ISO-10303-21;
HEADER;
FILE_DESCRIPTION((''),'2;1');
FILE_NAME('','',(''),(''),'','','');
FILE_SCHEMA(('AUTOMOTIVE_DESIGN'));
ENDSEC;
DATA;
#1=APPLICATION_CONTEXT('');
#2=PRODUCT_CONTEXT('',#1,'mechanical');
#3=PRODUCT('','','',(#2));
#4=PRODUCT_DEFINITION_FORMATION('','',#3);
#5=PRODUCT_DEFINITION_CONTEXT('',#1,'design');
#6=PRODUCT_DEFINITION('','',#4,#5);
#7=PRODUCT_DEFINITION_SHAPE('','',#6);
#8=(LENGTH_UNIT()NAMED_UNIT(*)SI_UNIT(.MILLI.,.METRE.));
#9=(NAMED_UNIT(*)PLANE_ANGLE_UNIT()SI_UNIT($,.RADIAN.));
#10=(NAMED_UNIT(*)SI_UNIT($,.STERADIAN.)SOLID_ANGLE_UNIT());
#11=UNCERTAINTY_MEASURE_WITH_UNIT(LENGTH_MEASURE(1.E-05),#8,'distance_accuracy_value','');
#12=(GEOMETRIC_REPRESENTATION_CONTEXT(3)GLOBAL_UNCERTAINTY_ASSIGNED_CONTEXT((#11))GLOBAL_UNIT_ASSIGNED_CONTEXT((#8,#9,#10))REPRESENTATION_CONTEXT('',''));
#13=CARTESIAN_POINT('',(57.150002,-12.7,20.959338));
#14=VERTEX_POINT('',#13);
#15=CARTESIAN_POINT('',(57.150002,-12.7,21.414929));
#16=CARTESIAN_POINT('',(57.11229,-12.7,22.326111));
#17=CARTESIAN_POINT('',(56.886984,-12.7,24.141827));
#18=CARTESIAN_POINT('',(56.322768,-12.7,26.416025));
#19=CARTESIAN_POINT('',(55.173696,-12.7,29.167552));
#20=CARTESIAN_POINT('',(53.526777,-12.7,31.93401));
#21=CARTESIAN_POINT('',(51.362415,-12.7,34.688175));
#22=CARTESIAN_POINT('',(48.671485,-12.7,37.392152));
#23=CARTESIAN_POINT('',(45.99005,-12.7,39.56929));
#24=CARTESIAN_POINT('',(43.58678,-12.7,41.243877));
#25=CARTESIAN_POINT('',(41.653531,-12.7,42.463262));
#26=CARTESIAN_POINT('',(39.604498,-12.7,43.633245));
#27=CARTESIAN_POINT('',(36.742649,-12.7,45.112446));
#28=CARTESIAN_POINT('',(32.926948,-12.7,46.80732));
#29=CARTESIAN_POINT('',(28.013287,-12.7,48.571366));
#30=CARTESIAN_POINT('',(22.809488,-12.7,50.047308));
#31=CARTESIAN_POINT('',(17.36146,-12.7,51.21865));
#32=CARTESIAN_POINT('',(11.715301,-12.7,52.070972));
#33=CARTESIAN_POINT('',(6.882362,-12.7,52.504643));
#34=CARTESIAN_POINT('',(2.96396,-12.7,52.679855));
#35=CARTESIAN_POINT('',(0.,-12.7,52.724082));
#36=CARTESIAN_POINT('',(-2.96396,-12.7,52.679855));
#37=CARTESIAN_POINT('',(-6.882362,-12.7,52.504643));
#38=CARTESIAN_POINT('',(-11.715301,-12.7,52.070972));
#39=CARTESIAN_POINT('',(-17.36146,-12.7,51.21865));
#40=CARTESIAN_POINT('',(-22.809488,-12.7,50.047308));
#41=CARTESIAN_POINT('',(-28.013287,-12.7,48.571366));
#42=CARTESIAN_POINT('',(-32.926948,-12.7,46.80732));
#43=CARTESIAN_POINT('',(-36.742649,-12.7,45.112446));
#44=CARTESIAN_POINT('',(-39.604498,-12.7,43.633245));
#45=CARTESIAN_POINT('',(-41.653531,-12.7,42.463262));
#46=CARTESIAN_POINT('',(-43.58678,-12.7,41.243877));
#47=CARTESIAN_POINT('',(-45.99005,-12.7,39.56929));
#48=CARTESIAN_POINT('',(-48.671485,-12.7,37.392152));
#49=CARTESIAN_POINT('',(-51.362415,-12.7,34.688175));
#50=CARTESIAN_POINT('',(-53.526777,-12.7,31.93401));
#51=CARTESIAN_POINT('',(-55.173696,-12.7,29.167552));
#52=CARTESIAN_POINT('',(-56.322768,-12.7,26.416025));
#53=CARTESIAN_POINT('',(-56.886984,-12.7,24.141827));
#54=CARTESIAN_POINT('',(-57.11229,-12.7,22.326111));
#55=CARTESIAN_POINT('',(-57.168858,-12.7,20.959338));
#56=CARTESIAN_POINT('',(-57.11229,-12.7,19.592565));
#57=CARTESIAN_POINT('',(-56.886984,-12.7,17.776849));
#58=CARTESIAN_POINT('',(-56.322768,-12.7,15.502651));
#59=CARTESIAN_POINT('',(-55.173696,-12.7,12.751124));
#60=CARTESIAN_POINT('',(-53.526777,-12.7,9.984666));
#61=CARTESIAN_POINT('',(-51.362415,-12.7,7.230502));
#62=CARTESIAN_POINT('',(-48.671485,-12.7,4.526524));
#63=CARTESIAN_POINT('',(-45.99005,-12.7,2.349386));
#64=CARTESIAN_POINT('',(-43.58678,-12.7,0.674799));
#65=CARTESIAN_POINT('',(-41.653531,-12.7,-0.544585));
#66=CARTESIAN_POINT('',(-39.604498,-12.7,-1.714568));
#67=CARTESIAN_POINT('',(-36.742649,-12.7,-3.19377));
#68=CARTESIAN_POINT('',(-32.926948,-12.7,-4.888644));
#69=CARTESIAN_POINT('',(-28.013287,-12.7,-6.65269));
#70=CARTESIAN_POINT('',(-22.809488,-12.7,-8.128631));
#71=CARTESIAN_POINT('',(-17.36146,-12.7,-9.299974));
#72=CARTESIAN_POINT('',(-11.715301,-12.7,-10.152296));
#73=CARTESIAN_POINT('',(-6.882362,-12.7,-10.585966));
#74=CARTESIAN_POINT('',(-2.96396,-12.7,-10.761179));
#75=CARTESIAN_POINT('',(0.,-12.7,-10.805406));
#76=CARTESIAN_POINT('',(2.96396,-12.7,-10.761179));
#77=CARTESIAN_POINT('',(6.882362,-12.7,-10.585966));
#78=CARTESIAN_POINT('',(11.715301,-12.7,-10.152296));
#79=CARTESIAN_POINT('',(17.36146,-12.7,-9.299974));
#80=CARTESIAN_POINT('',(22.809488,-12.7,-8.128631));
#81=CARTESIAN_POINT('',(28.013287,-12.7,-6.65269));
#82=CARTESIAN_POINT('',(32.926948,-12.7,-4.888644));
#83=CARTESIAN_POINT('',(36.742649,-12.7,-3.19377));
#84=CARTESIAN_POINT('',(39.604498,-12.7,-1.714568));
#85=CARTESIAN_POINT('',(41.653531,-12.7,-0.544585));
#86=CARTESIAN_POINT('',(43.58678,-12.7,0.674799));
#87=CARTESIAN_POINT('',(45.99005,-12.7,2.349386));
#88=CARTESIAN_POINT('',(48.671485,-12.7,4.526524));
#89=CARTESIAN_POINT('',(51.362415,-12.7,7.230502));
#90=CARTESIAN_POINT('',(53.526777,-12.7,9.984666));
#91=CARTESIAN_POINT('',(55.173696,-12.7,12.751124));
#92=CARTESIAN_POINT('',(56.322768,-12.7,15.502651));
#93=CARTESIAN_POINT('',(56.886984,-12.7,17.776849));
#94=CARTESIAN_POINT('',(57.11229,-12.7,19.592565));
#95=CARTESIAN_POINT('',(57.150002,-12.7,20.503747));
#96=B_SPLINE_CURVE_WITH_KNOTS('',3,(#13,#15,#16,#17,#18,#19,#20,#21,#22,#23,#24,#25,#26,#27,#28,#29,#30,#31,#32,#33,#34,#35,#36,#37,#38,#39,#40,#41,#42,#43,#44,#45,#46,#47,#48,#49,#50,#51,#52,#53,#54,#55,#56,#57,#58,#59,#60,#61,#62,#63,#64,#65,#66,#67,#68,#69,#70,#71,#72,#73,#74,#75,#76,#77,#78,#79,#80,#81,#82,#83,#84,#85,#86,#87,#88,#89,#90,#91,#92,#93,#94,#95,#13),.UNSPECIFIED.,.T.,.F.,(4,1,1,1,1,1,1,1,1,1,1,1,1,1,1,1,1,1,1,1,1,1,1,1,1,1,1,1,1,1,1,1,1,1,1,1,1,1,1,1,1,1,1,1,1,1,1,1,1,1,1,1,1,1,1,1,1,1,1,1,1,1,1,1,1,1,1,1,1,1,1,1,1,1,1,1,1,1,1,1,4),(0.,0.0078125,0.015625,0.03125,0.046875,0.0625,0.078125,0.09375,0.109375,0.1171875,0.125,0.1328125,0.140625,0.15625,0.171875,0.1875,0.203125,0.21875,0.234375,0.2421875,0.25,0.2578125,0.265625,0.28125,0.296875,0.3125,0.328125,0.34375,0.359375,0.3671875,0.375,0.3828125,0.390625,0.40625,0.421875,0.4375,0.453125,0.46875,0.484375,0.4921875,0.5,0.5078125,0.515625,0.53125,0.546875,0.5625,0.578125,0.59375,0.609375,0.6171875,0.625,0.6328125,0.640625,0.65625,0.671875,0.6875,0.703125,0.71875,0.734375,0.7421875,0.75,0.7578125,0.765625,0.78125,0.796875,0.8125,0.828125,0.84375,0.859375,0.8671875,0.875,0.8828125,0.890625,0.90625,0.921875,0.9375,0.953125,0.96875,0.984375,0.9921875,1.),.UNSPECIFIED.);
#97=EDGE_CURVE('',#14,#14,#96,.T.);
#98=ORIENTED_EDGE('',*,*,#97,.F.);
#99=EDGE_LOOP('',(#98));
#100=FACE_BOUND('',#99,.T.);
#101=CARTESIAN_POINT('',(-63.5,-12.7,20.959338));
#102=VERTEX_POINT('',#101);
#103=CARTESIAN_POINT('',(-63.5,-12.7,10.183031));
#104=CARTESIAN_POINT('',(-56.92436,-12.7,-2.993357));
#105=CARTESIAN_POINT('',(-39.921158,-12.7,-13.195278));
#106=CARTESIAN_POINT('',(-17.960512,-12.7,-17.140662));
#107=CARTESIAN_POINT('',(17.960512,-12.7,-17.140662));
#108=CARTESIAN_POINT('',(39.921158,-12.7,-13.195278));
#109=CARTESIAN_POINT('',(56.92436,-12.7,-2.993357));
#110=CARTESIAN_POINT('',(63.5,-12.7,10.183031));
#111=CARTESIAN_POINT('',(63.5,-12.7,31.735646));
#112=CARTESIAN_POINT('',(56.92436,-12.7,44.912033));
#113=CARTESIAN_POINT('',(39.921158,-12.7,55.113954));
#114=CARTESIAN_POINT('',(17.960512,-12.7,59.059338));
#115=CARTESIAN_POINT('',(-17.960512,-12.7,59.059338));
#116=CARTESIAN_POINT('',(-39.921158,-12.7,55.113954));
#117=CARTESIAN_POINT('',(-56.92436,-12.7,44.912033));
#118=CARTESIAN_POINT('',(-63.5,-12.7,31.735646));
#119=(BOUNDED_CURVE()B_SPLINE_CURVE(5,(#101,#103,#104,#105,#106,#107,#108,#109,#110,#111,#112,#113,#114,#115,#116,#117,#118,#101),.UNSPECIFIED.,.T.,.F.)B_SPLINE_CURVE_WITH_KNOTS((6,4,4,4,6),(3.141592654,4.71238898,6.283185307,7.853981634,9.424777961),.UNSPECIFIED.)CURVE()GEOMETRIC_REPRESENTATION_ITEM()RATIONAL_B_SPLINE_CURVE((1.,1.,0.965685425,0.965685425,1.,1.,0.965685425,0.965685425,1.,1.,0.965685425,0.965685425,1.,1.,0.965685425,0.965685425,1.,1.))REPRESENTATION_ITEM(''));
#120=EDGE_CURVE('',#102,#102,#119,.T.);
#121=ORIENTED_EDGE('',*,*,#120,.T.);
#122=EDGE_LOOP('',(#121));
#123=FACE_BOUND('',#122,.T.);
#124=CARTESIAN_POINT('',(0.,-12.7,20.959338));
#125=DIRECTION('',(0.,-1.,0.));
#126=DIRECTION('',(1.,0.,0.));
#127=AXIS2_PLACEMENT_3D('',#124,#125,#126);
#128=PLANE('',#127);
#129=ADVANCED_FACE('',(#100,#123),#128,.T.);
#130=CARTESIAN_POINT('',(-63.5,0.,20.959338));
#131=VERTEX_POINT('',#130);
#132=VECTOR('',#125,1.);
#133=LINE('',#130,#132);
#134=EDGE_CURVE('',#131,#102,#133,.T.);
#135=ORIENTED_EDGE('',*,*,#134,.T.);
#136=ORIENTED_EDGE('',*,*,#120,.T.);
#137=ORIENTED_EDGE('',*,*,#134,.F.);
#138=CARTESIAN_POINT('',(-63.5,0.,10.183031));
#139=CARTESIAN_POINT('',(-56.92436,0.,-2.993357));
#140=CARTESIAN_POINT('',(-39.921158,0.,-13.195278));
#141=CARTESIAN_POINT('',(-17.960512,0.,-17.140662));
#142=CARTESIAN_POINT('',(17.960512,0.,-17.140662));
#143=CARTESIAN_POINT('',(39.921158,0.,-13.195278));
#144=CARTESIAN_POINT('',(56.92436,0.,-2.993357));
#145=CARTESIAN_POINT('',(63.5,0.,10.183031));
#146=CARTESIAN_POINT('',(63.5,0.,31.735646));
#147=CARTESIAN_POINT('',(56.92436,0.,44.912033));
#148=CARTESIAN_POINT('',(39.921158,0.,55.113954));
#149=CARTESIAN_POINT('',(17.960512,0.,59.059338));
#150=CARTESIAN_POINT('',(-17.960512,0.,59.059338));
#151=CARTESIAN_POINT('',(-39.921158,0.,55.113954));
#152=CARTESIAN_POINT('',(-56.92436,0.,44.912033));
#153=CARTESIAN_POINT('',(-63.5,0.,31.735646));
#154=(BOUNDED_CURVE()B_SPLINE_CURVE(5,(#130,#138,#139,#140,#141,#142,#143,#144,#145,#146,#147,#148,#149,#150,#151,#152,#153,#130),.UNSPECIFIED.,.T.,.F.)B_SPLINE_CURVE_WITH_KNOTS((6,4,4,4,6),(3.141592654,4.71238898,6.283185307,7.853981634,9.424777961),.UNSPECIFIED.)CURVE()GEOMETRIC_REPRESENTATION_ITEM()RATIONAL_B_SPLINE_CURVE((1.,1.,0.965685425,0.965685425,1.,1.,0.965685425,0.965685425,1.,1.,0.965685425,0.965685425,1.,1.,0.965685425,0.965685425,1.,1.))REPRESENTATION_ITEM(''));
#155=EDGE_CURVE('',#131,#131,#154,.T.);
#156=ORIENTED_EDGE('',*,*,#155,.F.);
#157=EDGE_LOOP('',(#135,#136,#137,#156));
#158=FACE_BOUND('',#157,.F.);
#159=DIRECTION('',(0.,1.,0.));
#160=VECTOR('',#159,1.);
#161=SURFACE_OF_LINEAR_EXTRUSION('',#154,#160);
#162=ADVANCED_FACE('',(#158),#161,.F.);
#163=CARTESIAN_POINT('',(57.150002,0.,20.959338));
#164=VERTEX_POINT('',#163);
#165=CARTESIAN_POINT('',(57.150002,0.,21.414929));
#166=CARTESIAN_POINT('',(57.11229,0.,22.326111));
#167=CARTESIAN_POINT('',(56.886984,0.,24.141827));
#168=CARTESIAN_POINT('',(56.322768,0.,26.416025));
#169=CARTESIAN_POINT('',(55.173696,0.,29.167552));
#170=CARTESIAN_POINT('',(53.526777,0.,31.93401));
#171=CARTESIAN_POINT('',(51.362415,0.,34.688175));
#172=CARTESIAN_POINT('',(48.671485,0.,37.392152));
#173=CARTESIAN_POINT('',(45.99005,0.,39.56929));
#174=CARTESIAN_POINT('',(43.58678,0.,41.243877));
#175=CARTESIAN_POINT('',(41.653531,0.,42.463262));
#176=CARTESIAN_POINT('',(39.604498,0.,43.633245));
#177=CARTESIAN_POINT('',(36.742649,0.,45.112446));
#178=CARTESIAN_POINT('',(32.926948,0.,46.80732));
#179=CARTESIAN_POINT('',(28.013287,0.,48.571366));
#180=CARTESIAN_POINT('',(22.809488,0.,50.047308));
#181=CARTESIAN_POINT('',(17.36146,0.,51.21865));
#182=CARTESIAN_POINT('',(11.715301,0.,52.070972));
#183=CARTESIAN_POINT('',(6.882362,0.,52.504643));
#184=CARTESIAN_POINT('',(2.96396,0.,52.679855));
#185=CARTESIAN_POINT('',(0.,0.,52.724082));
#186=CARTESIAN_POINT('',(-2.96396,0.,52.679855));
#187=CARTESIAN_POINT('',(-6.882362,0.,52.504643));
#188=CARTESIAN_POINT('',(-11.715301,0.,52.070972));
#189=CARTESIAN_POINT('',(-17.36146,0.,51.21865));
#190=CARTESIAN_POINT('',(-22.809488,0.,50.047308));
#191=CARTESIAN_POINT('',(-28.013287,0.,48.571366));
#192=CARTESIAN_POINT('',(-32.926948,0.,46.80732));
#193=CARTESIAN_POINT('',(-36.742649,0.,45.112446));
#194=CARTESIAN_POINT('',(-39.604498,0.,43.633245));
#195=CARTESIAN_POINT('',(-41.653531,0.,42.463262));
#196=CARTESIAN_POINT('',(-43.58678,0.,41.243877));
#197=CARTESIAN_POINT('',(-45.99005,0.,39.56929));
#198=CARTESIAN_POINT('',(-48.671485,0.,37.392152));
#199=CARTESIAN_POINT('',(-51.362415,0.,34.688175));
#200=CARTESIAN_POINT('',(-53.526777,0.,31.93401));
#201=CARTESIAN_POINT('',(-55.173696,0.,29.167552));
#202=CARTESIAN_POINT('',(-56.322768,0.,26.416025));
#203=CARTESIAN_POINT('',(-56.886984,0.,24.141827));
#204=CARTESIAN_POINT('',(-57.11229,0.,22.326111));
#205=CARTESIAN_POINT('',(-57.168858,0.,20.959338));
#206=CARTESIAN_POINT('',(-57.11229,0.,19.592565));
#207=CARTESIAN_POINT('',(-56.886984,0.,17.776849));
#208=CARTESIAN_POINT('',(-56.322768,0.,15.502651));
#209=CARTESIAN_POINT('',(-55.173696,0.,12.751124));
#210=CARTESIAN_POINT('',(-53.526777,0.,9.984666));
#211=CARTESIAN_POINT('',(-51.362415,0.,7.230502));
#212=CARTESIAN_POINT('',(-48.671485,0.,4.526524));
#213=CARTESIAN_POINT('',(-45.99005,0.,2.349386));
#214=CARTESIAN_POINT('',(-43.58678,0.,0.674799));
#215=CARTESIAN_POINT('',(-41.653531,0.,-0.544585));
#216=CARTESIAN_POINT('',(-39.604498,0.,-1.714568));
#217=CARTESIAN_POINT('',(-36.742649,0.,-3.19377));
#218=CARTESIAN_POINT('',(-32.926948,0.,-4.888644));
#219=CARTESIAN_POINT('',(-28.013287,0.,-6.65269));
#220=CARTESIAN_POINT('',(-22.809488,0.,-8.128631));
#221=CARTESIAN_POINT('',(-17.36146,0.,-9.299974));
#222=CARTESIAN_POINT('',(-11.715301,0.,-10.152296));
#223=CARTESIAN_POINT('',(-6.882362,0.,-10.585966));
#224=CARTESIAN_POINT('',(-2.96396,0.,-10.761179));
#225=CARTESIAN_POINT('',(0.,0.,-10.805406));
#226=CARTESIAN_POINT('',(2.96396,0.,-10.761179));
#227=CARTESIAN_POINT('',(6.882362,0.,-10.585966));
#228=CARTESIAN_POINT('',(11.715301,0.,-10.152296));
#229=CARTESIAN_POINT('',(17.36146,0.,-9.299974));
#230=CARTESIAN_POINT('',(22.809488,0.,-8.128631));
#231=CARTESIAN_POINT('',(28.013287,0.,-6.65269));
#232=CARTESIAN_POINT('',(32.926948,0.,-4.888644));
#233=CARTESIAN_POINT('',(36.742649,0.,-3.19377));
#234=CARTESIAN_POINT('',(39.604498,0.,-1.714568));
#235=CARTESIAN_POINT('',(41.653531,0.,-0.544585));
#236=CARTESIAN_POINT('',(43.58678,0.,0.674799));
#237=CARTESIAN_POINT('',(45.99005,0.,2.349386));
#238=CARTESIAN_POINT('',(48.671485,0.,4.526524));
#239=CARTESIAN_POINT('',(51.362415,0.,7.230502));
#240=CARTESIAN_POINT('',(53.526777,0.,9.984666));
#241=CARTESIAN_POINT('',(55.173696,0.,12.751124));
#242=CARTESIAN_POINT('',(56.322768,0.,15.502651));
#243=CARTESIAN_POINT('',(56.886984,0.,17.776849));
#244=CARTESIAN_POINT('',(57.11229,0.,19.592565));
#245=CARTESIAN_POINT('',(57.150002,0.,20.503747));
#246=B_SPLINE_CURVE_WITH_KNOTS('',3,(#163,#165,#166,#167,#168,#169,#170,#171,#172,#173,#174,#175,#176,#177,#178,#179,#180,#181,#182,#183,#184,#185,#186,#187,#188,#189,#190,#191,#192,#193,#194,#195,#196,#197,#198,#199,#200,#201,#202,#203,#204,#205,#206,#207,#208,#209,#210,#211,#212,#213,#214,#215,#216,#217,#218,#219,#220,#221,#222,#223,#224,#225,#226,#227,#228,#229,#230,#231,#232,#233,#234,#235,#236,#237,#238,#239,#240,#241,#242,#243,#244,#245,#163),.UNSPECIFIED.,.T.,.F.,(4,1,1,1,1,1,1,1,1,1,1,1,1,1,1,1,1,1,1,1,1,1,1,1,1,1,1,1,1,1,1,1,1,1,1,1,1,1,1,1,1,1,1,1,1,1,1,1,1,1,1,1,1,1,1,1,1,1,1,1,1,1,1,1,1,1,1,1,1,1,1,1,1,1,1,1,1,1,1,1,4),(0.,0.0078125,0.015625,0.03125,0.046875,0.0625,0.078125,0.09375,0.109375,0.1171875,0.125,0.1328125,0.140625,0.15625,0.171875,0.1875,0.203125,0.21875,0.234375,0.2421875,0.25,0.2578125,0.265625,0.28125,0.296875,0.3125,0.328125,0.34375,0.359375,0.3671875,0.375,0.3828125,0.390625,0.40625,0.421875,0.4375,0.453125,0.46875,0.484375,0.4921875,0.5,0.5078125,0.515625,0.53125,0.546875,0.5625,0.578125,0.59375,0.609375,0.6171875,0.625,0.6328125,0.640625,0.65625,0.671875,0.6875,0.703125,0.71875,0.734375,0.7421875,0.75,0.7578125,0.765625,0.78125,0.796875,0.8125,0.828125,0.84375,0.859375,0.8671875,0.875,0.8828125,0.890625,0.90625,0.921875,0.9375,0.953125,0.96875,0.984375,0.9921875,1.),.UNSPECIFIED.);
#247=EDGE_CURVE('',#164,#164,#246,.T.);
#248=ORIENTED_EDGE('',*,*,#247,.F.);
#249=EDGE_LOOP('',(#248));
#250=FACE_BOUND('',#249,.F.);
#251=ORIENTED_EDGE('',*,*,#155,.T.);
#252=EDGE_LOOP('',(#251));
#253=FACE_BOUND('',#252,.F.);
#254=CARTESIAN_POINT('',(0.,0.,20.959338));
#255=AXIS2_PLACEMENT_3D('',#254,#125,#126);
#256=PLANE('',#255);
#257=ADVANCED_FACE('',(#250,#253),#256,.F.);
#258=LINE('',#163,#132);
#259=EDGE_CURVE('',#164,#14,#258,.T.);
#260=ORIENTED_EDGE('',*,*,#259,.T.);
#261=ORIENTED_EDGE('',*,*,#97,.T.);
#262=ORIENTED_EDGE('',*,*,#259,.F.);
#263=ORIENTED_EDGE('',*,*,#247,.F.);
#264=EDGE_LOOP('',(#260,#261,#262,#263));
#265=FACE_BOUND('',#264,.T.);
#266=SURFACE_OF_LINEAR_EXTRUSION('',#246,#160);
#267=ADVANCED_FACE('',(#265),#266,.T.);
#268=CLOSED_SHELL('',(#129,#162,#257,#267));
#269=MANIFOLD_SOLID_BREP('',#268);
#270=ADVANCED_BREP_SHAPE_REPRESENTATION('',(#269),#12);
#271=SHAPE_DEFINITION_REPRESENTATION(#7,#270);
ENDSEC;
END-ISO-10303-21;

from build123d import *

# Parameters (mm, degrees)
F1_DEPTH = 12.7


# Not quite as in the source:
# - the dataset's text gives a spline's control points without its knots; the knots are read off the source's solid


with BuildPart() as f1:
    # F0 (on Front) → F1 (new body)
    with BuildSketch(Plane.XZ):
        with BuildLine():
            add(Edge.make_bspline(
                [(63.5, 20.9593381733), (63.5, 59.0593381733), (0, 59.0593381733), (-63.5, 59.0593381733), (-63.5, 20.9593381733)],
                knots=[0, 0, 0, 1.5707963268, 1.5707963268, 3.1415926536, 3.1415926536, 3.1415926536], degree=2, weights=[1, 0.7071067812, 1, 0.7071067812, 1]))
            add(Edge.make_bspline(
                [(-63.5, 20.9593381733), (-63.5, -17.1406618267), (0, -17.1406618267), (63.5, -17.1406618267), (63.5, 20.9593381733)],
                knots=[3.1415926536, 3.1415926536, 3.1415926536, 4.7123889804, 4.7123889804, 6.2831853072, 6.2831853072, 6.2831853072], degree=2, weights=[1, 0.7071067812, 1, 0.7071067812, 1]))
        make_face()
        with BuildLine():
            add(Edge.make_bspline(
                [(-57.1500017911, 20.9593381733), (-57.1500017911, 20.5037470944), (-57.1122902213, 19.5925649367), (-56.8869841088, 17.7768493493), (-56.3227681021, 15.5026509765), (-55.1736964536, 12.7511242731), (-53.5267765887, 9.984666464), (-51.362414901, 7.2305016893), (-48.6714850573, 4.5265238967), (-45.9900495115, 2.3493864122), (-43.5867796933, 0.6747992402), (-41.6535307679, -0.5445851955), (-39.6044981147, -1.7145683435), (-36.7426493863, -3.1937696987), (-32.9269482144, -4.8886439263), (-28.0132867087, -6.6526895833), (-22.8094881511, -8.1286312373), (-17.3614595644, -9.2999739711), (-11.715301465, -10.1522960471), (-6.8823620796, -10.5859661799), (-2.9639604007, -10.7611786742), (0, -10.8054060896), (2.9639604007, -10.7611786742), (6.8823620796, -10.5859661799), (11.715301465, -10.1522960471), (17.3614595644, -9.2999739711), (22.8094881511, -8.1286312373), (28.0132867087, -6.6526895833), (32.9269482144, -4.8886439263), (36.7426493863, -3.1937696987), (39.6044981147, -1.7145683435), (41.6535307679, -0.5445851955), (43.5867796933, 0.6747992402), (45.9900495115, 2.3493864122), (48.6714850573, 4.5265238967), (51.362414901, 7.2305016893), (53.5267765887, 9.984666464), (55.1736964536, 12.7511242731), (56.3227681021, 15.5026509765), (56.8869841088, 17.7768493493), (57.1122902213, 19.5925649367), (57.1500017911, 20.5037470944), (57.1500017911, 20.9593381733)],
                knots=[0.5, 0.5, 0.5, 0.5, 0.5078125, 0.515625, 0.53125, 0.546875, 0.5625, 0.578125, 0.59375, 0.609375, 0.6171875, 0.625, 0.6328125, 0.640625, 0.65625, 0.671875, 0.6875, 0.703125, 0.71875, 0.734375, 0.7421875, 0.75, 0.7578125, 0.765625, 0.78125, 0.796875, 0.8125, 0.828125, 0.84375, 0.859375, 0.8671875, 0.875, 0.8828125, 0.890625, 0.90625, 0.921875, 0.9375, 0.953125, 0.96875, 0.984375, 0.9921875, 1, 1, 1, 1], degree=3))
            add(Edge.make_bspline(
                [(57.1500017911, 20.9593381733), (57.1500017911, 21.4149292521), (57.1122902213, 22.3261114098), (56.8869841088, 24.1418269973), (56.3227681021, 26.4160253701), (55.1736964536, 29.1675520735), (53.5267765887, 31.9340098826), (51.362414901, 34.6881746572), (48.6714850573, 37.3921524499), (45.9900495115, 39.5692899343), (43.5867796933, 41.2438771063), (41.6535307679, 42.463261542), (39.6044981147, 43.6332446901), (36.7426493863, 45.1124460453), (32.9269482144, 46.8073202728), (28.0132867087, 48.5713659298), (22.8094881511, 50.0473075839), (17.3614595644, 51.2186503177), (11.715301465, 52.0709723936), (6.8823620796, 52.5046425265), (2.9639604007, 52.6798550208), (0, 52.7240824362), (-2.9639604007, 52.6798550208), (-6.8823620796, 52.5046425265), (-11.715301465, 52.0709723936), (-17.3614595644, 51.2186503177), (-22.8094881511, 50.0473075839), (-28.0132867087, 48.5713659298), (-32.9269482144, 46.8073202728), (-36.7426493863, 45.1124460453), (-39.6044981147, 43.6332446901), (-41.6535307679, 42.463261542), (-43.5867796933, 41.2438771063), (-45.9900495115, 39.5692899343), (-48.6714850573, 37.3921524499), (-51.362414901, 34.6881746572), (-53.5267765887, 31.9340098826), (-55.1736964536, 29.1675520735), (-56.3227681021, 26.4160253701), (-56.8869841088, 24.1418269973), (-57.1122902213, 22.3261114098), (-57.1500017911, 21.4149292521), (-57.1500017911, 20.9593381733)],
                knots=[0, 0, 0, 0, 0.0078125, 0.015625, 0.03125, 0.046875, 0.0625, 0.078125, 0.09375, 0.109375, 0.1171875, 0.125, 0.1328125, 0.140625, 0.15625, 0.171875, 0.1875, 0.203125, 0.21875, 0.234375, 0.2421875, 0.25, 0.2578125, 0.265625, 0.28125, 0.296875, 0.3125, 0.328125, 0.34375, 0.359375, 0.3671875, 0.375, 0.3828125, 0.390625, 0.40625, 0.421875, 0.4375, 0.453125, 0.46875, 0.484375, 0.4921875, 0.5, 0.5, 0.5, 0.5], degree=3))
        make_face(mode=Mode.SUBTRACT)
    extrude(amount=F1_DEPTH)


solid = f1.part
